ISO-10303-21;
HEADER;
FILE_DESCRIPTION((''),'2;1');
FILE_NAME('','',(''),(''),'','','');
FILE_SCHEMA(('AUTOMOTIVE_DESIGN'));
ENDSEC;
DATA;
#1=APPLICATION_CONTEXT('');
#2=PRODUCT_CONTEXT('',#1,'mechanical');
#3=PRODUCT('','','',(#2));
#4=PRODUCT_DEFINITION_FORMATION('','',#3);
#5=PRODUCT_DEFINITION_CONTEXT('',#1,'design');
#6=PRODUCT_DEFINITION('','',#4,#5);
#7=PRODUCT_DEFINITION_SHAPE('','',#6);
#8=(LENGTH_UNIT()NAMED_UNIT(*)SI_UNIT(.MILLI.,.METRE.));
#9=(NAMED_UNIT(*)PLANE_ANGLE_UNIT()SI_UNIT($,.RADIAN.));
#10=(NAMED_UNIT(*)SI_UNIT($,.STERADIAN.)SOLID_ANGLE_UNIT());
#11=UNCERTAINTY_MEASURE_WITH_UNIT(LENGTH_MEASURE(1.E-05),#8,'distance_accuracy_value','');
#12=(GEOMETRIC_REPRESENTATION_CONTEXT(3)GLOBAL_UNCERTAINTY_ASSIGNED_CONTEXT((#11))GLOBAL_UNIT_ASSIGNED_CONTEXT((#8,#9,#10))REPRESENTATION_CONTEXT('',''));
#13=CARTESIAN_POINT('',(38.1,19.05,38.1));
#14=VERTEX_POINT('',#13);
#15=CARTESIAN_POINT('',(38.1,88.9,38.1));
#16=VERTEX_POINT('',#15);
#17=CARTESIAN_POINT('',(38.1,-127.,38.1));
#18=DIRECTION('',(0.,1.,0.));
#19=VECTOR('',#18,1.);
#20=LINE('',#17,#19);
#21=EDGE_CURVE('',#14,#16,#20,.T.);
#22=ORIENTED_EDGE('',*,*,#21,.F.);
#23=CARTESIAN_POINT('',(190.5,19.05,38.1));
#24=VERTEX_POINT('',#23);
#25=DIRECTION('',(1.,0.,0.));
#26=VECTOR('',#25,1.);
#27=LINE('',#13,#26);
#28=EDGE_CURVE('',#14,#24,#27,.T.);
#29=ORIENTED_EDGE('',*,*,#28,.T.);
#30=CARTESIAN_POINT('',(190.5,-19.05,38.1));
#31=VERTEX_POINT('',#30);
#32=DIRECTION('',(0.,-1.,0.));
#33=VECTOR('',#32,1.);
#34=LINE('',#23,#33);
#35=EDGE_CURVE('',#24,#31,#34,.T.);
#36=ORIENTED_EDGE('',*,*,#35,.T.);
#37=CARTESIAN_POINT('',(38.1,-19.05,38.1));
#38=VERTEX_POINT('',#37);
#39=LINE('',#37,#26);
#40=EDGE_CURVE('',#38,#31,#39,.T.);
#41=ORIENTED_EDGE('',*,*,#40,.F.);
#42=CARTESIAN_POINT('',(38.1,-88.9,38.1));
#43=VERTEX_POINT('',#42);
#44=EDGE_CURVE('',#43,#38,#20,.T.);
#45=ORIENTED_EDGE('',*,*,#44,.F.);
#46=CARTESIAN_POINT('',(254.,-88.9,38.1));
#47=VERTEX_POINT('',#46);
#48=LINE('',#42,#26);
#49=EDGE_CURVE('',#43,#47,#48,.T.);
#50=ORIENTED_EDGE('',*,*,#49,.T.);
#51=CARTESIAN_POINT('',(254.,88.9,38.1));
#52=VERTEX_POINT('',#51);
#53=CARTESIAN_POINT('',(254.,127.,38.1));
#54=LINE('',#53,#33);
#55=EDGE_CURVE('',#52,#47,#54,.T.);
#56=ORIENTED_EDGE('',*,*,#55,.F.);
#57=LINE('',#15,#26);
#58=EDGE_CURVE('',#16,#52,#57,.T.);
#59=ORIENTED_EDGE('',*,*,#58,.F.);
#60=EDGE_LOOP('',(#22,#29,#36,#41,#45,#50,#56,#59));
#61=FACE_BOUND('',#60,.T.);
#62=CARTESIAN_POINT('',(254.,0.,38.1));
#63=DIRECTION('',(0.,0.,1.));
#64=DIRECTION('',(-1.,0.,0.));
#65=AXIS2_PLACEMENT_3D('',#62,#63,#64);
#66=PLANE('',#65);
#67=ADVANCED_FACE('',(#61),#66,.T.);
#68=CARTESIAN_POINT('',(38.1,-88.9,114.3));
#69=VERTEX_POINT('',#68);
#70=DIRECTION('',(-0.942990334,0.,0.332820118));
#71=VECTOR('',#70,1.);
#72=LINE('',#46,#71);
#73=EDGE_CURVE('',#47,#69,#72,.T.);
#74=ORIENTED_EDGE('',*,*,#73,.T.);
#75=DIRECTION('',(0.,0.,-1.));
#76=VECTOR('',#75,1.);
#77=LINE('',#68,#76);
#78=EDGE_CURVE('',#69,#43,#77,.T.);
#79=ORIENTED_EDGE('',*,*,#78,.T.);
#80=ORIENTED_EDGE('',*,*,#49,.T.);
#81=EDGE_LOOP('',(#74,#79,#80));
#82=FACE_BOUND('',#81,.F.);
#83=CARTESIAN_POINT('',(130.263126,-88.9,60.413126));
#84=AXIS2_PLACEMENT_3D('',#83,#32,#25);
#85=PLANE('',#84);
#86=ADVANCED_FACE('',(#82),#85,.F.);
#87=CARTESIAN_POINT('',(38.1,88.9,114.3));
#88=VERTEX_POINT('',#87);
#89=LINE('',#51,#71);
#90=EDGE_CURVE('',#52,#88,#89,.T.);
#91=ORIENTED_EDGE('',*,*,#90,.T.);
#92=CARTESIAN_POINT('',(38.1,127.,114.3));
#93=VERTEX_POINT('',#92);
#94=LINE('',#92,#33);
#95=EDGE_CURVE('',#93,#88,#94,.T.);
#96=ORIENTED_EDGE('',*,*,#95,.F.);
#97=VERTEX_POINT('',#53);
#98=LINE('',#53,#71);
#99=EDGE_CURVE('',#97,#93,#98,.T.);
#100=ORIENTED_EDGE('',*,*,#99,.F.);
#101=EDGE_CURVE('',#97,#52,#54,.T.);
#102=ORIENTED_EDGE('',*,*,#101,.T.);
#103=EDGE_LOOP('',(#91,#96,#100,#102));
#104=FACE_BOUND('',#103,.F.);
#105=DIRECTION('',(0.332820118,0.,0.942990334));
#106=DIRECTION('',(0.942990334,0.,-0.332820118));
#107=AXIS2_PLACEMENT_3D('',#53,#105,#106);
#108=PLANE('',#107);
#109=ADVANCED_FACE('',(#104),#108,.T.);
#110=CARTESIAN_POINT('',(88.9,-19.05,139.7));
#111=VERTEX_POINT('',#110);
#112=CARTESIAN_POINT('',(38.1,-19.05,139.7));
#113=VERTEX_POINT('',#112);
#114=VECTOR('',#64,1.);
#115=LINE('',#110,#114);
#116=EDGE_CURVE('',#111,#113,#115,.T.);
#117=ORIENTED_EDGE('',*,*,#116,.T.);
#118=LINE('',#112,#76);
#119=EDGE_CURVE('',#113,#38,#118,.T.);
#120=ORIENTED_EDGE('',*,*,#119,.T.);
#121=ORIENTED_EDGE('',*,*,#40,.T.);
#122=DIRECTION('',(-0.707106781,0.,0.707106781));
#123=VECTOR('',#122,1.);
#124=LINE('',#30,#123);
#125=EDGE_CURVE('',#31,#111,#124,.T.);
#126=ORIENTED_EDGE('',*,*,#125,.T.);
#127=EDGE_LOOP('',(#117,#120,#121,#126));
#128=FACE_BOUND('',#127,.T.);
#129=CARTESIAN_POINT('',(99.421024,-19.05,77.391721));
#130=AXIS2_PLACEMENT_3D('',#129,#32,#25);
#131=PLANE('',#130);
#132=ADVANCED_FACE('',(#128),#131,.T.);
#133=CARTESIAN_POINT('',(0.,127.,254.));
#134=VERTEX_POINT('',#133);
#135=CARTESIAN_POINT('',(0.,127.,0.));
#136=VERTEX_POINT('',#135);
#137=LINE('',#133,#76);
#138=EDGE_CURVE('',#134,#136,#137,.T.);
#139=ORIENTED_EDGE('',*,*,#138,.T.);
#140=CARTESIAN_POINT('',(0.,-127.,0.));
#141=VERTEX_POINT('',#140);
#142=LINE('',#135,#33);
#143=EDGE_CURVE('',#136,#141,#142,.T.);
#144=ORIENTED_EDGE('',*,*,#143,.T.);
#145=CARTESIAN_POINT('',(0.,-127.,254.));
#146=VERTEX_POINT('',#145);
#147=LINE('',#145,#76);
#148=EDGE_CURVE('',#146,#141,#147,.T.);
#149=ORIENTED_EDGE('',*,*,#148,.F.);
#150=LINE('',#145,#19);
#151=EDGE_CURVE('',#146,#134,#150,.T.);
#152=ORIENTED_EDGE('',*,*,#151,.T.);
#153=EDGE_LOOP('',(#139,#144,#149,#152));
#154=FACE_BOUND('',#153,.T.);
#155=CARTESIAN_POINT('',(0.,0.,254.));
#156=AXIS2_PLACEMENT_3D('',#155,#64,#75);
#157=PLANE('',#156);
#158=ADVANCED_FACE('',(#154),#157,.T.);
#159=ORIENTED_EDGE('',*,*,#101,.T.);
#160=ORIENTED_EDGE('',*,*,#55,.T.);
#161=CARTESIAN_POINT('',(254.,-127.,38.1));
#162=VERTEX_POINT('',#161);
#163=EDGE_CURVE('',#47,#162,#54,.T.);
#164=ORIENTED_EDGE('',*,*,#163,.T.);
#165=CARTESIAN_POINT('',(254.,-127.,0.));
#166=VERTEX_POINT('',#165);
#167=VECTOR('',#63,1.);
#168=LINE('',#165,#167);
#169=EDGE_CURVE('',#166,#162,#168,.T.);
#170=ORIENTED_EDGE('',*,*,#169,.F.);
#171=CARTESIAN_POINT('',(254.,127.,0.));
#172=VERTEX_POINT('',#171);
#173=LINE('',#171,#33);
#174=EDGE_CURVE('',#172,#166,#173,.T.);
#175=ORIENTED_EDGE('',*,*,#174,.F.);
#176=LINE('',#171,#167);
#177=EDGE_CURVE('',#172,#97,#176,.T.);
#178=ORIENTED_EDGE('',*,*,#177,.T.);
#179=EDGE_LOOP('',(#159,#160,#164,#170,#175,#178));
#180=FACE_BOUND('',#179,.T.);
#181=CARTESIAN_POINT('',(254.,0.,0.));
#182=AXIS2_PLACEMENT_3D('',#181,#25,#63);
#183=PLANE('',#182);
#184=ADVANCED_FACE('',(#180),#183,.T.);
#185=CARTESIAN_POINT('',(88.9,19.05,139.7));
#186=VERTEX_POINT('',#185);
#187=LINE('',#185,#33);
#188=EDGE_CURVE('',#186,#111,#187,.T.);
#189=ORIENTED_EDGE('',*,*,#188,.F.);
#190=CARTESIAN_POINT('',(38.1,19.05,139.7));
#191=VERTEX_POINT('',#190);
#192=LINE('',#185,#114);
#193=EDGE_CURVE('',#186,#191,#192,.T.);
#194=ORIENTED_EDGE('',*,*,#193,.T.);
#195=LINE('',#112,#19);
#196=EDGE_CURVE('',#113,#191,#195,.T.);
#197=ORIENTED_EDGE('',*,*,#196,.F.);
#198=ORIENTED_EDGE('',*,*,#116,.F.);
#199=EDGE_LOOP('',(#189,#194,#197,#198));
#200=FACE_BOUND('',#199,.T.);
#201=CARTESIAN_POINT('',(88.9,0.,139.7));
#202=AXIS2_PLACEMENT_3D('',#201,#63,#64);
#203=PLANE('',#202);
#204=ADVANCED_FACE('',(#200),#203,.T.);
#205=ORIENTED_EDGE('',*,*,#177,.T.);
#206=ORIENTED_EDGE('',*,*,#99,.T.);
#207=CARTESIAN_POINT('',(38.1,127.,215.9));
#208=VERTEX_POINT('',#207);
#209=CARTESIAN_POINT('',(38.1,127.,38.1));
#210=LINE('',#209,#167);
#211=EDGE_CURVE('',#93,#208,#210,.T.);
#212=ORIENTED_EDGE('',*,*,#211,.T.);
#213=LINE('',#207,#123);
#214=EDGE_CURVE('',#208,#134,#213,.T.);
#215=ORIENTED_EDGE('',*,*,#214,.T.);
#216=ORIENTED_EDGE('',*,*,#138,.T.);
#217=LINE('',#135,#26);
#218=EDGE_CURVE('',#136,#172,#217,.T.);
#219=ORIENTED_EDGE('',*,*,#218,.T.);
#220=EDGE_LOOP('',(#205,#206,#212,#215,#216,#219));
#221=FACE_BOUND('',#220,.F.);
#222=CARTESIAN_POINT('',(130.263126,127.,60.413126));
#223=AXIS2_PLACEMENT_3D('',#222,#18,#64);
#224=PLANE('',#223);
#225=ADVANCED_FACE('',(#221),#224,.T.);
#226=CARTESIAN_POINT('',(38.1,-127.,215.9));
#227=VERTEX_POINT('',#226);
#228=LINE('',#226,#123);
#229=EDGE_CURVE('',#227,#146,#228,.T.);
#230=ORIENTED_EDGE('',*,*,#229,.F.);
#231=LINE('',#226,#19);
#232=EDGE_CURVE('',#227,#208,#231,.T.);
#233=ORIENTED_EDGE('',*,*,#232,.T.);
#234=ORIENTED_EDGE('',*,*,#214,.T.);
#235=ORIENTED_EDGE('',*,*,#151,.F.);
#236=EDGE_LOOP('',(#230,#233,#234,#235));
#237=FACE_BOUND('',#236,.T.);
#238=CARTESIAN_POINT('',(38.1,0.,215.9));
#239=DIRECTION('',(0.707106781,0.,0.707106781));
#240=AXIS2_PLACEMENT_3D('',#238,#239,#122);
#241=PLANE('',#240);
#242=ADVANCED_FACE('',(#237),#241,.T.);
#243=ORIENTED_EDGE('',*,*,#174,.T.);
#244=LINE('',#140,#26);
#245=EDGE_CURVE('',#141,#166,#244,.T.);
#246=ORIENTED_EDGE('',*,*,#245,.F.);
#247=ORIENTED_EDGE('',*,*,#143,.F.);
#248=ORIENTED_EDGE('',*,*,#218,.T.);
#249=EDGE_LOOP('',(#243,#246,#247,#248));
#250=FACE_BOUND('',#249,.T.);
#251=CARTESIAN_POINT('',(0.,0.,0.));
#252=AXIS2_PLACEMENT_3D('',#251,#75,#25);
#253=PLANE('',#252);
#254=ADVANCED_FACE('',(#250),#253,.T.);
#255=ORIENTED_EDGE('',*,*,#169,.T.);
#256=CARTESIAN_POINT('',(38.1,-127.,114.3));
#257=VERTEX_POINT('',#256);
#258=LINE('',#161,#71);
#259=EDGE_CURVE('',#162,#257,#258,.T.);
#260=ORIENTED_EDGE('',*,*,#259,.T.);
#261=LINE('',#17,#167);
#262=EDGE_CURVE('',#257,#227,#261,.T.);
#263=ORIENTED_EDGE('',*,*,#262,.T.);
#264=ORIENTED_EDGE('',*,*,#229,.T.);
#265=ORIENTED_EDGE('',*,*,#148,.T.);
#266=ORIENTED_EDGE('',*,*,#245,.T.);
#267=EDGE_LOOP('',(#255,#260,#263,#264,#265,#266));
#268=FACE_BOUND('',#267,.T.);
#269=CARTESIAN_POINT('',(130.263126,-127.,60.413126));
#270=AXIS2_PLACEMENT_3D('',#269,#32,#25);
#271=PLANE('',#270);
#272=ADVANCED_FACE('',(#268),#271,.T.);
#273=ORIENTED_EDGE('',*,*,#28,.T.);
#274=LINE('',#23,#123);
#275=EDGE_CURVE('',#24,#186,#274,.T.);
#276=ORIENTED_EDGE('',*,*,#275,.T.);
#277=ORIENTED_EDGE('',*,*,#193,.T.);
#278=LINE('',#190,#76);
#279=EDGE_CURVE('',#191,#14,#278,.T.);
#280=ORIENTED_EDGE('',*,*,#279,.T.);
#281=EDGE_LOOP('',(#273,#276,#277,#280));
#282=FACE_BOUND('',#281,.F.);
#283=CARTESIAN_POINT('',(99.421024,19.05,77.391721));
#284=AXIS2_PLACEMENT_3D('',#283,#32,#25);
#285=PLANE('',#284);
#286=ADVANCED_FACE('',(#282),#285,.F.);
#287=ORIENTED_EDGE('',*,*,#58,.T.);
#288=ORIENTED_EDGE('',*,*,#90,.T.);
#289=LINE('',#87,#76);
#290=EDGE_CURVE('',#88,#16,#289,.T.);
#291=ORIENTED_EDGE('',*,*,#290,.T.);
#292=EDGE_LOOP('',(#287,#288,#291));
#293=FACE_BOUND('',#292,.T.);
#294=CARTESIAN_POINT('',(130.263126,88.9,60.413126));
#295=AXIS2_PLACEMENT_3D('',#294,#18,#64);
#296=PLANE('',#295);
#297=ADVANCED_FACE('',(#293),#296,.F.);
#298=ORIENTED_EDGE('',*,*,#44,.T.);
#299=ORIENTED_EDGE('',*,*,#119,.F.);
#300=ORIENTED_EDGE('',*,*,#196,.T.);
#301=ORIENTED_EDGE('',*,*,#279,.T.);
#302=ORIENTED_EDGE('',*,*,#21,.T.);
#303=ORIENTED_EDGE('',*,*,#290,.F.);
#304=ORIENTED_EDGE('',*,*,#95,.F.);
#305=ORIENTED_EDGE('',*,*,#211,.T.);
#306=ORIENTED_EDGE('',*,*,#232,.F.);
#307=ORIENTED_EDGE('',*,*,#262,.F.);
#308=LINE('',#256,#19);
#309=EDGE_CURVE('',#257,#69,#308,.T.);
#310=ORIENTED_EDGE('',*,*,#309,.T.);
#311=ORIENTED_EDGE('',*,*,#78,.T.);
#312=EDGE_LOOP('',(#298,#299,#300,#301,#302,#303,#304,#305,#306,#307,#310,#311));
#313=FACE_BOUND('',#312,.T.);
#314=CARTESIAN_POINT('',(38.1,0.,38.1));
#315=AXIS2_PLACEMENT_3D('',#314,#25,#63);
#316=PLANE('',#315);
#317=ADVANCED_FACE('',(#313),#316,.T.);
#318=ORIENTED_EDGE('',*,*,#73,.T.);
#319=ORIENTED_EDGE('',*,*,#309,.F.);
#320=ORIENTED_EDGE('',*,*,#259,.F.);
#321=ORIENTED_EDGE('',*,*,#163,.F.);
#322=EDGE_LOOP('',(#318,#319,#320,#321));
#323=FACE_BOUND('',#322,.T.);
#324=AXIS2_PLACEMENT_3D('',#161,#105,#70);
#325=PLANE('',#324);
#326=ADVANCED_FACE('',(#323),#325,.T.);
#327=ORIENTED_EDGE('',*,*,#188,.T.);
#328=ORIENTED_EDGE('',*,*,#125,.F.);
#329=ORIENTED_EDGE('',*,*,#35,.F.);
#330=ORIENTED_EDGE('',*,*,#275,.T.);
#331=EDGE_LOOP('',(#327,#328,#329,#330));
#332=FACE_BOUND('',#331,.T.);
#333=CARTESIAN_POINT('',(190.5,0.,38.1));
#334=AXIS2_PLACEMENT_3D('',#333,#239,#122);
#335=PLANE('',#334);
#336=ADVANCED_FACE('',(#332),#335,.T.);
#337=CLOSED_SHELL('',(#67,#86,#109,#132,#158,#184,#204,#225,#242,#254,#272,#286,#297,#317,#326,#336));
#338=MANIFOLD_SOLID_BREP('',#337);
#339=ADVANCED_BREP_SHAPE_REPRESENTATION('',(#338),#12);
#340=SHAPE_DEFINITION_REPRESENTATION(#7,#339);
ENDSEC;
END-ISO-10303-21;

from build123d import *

# Parameters (mm, degrees)
F1_DEPTH = 127
F3_DEPTH = 38.1
F4_DEPTH = 19.05


# Not quite as in the source:
# - a pattern or mirror of a feature is missing from the dataset's text; its kind, count and spacing are read off the source's solid


with BuildPart() as f1:
    # F0 (on Front) → F1 (new body, symmetric)
    with BuildSketch(Plane.XZ):
        Polygon((0, 254), (0, 0), (254, 0), (254, 38.1), (190.5, 38.1), (38.1, 38.1), (38.1, 139.7), (38.1, 215.9), align=None)
    extrude(amount=F1_DEPTH, both=True)

    # F2 (on face) → F3 (join)
    with BuildSketch(Plane.XZ.offset(127)):
        Polygon((254, 38.1), (38.1, 114.3), (38.1, 38.1), align=None)
    f3 = extrude(amount=-F3_DEPTH)

    # F3_copies: F3 across plane
    add(f3.mirror(Plane.ZX))

    # F0 (on Front) → F4 (join, symmetric)
    with BuildSketch(Plane.XZ):
        Polygon((38.1, 38.1), (190.5, 38.1), (88.9, 139.7), (38.1, 139.7), align=None)
    extrude(amount=F4_DEPTH, both=True)


solid = f1.part
